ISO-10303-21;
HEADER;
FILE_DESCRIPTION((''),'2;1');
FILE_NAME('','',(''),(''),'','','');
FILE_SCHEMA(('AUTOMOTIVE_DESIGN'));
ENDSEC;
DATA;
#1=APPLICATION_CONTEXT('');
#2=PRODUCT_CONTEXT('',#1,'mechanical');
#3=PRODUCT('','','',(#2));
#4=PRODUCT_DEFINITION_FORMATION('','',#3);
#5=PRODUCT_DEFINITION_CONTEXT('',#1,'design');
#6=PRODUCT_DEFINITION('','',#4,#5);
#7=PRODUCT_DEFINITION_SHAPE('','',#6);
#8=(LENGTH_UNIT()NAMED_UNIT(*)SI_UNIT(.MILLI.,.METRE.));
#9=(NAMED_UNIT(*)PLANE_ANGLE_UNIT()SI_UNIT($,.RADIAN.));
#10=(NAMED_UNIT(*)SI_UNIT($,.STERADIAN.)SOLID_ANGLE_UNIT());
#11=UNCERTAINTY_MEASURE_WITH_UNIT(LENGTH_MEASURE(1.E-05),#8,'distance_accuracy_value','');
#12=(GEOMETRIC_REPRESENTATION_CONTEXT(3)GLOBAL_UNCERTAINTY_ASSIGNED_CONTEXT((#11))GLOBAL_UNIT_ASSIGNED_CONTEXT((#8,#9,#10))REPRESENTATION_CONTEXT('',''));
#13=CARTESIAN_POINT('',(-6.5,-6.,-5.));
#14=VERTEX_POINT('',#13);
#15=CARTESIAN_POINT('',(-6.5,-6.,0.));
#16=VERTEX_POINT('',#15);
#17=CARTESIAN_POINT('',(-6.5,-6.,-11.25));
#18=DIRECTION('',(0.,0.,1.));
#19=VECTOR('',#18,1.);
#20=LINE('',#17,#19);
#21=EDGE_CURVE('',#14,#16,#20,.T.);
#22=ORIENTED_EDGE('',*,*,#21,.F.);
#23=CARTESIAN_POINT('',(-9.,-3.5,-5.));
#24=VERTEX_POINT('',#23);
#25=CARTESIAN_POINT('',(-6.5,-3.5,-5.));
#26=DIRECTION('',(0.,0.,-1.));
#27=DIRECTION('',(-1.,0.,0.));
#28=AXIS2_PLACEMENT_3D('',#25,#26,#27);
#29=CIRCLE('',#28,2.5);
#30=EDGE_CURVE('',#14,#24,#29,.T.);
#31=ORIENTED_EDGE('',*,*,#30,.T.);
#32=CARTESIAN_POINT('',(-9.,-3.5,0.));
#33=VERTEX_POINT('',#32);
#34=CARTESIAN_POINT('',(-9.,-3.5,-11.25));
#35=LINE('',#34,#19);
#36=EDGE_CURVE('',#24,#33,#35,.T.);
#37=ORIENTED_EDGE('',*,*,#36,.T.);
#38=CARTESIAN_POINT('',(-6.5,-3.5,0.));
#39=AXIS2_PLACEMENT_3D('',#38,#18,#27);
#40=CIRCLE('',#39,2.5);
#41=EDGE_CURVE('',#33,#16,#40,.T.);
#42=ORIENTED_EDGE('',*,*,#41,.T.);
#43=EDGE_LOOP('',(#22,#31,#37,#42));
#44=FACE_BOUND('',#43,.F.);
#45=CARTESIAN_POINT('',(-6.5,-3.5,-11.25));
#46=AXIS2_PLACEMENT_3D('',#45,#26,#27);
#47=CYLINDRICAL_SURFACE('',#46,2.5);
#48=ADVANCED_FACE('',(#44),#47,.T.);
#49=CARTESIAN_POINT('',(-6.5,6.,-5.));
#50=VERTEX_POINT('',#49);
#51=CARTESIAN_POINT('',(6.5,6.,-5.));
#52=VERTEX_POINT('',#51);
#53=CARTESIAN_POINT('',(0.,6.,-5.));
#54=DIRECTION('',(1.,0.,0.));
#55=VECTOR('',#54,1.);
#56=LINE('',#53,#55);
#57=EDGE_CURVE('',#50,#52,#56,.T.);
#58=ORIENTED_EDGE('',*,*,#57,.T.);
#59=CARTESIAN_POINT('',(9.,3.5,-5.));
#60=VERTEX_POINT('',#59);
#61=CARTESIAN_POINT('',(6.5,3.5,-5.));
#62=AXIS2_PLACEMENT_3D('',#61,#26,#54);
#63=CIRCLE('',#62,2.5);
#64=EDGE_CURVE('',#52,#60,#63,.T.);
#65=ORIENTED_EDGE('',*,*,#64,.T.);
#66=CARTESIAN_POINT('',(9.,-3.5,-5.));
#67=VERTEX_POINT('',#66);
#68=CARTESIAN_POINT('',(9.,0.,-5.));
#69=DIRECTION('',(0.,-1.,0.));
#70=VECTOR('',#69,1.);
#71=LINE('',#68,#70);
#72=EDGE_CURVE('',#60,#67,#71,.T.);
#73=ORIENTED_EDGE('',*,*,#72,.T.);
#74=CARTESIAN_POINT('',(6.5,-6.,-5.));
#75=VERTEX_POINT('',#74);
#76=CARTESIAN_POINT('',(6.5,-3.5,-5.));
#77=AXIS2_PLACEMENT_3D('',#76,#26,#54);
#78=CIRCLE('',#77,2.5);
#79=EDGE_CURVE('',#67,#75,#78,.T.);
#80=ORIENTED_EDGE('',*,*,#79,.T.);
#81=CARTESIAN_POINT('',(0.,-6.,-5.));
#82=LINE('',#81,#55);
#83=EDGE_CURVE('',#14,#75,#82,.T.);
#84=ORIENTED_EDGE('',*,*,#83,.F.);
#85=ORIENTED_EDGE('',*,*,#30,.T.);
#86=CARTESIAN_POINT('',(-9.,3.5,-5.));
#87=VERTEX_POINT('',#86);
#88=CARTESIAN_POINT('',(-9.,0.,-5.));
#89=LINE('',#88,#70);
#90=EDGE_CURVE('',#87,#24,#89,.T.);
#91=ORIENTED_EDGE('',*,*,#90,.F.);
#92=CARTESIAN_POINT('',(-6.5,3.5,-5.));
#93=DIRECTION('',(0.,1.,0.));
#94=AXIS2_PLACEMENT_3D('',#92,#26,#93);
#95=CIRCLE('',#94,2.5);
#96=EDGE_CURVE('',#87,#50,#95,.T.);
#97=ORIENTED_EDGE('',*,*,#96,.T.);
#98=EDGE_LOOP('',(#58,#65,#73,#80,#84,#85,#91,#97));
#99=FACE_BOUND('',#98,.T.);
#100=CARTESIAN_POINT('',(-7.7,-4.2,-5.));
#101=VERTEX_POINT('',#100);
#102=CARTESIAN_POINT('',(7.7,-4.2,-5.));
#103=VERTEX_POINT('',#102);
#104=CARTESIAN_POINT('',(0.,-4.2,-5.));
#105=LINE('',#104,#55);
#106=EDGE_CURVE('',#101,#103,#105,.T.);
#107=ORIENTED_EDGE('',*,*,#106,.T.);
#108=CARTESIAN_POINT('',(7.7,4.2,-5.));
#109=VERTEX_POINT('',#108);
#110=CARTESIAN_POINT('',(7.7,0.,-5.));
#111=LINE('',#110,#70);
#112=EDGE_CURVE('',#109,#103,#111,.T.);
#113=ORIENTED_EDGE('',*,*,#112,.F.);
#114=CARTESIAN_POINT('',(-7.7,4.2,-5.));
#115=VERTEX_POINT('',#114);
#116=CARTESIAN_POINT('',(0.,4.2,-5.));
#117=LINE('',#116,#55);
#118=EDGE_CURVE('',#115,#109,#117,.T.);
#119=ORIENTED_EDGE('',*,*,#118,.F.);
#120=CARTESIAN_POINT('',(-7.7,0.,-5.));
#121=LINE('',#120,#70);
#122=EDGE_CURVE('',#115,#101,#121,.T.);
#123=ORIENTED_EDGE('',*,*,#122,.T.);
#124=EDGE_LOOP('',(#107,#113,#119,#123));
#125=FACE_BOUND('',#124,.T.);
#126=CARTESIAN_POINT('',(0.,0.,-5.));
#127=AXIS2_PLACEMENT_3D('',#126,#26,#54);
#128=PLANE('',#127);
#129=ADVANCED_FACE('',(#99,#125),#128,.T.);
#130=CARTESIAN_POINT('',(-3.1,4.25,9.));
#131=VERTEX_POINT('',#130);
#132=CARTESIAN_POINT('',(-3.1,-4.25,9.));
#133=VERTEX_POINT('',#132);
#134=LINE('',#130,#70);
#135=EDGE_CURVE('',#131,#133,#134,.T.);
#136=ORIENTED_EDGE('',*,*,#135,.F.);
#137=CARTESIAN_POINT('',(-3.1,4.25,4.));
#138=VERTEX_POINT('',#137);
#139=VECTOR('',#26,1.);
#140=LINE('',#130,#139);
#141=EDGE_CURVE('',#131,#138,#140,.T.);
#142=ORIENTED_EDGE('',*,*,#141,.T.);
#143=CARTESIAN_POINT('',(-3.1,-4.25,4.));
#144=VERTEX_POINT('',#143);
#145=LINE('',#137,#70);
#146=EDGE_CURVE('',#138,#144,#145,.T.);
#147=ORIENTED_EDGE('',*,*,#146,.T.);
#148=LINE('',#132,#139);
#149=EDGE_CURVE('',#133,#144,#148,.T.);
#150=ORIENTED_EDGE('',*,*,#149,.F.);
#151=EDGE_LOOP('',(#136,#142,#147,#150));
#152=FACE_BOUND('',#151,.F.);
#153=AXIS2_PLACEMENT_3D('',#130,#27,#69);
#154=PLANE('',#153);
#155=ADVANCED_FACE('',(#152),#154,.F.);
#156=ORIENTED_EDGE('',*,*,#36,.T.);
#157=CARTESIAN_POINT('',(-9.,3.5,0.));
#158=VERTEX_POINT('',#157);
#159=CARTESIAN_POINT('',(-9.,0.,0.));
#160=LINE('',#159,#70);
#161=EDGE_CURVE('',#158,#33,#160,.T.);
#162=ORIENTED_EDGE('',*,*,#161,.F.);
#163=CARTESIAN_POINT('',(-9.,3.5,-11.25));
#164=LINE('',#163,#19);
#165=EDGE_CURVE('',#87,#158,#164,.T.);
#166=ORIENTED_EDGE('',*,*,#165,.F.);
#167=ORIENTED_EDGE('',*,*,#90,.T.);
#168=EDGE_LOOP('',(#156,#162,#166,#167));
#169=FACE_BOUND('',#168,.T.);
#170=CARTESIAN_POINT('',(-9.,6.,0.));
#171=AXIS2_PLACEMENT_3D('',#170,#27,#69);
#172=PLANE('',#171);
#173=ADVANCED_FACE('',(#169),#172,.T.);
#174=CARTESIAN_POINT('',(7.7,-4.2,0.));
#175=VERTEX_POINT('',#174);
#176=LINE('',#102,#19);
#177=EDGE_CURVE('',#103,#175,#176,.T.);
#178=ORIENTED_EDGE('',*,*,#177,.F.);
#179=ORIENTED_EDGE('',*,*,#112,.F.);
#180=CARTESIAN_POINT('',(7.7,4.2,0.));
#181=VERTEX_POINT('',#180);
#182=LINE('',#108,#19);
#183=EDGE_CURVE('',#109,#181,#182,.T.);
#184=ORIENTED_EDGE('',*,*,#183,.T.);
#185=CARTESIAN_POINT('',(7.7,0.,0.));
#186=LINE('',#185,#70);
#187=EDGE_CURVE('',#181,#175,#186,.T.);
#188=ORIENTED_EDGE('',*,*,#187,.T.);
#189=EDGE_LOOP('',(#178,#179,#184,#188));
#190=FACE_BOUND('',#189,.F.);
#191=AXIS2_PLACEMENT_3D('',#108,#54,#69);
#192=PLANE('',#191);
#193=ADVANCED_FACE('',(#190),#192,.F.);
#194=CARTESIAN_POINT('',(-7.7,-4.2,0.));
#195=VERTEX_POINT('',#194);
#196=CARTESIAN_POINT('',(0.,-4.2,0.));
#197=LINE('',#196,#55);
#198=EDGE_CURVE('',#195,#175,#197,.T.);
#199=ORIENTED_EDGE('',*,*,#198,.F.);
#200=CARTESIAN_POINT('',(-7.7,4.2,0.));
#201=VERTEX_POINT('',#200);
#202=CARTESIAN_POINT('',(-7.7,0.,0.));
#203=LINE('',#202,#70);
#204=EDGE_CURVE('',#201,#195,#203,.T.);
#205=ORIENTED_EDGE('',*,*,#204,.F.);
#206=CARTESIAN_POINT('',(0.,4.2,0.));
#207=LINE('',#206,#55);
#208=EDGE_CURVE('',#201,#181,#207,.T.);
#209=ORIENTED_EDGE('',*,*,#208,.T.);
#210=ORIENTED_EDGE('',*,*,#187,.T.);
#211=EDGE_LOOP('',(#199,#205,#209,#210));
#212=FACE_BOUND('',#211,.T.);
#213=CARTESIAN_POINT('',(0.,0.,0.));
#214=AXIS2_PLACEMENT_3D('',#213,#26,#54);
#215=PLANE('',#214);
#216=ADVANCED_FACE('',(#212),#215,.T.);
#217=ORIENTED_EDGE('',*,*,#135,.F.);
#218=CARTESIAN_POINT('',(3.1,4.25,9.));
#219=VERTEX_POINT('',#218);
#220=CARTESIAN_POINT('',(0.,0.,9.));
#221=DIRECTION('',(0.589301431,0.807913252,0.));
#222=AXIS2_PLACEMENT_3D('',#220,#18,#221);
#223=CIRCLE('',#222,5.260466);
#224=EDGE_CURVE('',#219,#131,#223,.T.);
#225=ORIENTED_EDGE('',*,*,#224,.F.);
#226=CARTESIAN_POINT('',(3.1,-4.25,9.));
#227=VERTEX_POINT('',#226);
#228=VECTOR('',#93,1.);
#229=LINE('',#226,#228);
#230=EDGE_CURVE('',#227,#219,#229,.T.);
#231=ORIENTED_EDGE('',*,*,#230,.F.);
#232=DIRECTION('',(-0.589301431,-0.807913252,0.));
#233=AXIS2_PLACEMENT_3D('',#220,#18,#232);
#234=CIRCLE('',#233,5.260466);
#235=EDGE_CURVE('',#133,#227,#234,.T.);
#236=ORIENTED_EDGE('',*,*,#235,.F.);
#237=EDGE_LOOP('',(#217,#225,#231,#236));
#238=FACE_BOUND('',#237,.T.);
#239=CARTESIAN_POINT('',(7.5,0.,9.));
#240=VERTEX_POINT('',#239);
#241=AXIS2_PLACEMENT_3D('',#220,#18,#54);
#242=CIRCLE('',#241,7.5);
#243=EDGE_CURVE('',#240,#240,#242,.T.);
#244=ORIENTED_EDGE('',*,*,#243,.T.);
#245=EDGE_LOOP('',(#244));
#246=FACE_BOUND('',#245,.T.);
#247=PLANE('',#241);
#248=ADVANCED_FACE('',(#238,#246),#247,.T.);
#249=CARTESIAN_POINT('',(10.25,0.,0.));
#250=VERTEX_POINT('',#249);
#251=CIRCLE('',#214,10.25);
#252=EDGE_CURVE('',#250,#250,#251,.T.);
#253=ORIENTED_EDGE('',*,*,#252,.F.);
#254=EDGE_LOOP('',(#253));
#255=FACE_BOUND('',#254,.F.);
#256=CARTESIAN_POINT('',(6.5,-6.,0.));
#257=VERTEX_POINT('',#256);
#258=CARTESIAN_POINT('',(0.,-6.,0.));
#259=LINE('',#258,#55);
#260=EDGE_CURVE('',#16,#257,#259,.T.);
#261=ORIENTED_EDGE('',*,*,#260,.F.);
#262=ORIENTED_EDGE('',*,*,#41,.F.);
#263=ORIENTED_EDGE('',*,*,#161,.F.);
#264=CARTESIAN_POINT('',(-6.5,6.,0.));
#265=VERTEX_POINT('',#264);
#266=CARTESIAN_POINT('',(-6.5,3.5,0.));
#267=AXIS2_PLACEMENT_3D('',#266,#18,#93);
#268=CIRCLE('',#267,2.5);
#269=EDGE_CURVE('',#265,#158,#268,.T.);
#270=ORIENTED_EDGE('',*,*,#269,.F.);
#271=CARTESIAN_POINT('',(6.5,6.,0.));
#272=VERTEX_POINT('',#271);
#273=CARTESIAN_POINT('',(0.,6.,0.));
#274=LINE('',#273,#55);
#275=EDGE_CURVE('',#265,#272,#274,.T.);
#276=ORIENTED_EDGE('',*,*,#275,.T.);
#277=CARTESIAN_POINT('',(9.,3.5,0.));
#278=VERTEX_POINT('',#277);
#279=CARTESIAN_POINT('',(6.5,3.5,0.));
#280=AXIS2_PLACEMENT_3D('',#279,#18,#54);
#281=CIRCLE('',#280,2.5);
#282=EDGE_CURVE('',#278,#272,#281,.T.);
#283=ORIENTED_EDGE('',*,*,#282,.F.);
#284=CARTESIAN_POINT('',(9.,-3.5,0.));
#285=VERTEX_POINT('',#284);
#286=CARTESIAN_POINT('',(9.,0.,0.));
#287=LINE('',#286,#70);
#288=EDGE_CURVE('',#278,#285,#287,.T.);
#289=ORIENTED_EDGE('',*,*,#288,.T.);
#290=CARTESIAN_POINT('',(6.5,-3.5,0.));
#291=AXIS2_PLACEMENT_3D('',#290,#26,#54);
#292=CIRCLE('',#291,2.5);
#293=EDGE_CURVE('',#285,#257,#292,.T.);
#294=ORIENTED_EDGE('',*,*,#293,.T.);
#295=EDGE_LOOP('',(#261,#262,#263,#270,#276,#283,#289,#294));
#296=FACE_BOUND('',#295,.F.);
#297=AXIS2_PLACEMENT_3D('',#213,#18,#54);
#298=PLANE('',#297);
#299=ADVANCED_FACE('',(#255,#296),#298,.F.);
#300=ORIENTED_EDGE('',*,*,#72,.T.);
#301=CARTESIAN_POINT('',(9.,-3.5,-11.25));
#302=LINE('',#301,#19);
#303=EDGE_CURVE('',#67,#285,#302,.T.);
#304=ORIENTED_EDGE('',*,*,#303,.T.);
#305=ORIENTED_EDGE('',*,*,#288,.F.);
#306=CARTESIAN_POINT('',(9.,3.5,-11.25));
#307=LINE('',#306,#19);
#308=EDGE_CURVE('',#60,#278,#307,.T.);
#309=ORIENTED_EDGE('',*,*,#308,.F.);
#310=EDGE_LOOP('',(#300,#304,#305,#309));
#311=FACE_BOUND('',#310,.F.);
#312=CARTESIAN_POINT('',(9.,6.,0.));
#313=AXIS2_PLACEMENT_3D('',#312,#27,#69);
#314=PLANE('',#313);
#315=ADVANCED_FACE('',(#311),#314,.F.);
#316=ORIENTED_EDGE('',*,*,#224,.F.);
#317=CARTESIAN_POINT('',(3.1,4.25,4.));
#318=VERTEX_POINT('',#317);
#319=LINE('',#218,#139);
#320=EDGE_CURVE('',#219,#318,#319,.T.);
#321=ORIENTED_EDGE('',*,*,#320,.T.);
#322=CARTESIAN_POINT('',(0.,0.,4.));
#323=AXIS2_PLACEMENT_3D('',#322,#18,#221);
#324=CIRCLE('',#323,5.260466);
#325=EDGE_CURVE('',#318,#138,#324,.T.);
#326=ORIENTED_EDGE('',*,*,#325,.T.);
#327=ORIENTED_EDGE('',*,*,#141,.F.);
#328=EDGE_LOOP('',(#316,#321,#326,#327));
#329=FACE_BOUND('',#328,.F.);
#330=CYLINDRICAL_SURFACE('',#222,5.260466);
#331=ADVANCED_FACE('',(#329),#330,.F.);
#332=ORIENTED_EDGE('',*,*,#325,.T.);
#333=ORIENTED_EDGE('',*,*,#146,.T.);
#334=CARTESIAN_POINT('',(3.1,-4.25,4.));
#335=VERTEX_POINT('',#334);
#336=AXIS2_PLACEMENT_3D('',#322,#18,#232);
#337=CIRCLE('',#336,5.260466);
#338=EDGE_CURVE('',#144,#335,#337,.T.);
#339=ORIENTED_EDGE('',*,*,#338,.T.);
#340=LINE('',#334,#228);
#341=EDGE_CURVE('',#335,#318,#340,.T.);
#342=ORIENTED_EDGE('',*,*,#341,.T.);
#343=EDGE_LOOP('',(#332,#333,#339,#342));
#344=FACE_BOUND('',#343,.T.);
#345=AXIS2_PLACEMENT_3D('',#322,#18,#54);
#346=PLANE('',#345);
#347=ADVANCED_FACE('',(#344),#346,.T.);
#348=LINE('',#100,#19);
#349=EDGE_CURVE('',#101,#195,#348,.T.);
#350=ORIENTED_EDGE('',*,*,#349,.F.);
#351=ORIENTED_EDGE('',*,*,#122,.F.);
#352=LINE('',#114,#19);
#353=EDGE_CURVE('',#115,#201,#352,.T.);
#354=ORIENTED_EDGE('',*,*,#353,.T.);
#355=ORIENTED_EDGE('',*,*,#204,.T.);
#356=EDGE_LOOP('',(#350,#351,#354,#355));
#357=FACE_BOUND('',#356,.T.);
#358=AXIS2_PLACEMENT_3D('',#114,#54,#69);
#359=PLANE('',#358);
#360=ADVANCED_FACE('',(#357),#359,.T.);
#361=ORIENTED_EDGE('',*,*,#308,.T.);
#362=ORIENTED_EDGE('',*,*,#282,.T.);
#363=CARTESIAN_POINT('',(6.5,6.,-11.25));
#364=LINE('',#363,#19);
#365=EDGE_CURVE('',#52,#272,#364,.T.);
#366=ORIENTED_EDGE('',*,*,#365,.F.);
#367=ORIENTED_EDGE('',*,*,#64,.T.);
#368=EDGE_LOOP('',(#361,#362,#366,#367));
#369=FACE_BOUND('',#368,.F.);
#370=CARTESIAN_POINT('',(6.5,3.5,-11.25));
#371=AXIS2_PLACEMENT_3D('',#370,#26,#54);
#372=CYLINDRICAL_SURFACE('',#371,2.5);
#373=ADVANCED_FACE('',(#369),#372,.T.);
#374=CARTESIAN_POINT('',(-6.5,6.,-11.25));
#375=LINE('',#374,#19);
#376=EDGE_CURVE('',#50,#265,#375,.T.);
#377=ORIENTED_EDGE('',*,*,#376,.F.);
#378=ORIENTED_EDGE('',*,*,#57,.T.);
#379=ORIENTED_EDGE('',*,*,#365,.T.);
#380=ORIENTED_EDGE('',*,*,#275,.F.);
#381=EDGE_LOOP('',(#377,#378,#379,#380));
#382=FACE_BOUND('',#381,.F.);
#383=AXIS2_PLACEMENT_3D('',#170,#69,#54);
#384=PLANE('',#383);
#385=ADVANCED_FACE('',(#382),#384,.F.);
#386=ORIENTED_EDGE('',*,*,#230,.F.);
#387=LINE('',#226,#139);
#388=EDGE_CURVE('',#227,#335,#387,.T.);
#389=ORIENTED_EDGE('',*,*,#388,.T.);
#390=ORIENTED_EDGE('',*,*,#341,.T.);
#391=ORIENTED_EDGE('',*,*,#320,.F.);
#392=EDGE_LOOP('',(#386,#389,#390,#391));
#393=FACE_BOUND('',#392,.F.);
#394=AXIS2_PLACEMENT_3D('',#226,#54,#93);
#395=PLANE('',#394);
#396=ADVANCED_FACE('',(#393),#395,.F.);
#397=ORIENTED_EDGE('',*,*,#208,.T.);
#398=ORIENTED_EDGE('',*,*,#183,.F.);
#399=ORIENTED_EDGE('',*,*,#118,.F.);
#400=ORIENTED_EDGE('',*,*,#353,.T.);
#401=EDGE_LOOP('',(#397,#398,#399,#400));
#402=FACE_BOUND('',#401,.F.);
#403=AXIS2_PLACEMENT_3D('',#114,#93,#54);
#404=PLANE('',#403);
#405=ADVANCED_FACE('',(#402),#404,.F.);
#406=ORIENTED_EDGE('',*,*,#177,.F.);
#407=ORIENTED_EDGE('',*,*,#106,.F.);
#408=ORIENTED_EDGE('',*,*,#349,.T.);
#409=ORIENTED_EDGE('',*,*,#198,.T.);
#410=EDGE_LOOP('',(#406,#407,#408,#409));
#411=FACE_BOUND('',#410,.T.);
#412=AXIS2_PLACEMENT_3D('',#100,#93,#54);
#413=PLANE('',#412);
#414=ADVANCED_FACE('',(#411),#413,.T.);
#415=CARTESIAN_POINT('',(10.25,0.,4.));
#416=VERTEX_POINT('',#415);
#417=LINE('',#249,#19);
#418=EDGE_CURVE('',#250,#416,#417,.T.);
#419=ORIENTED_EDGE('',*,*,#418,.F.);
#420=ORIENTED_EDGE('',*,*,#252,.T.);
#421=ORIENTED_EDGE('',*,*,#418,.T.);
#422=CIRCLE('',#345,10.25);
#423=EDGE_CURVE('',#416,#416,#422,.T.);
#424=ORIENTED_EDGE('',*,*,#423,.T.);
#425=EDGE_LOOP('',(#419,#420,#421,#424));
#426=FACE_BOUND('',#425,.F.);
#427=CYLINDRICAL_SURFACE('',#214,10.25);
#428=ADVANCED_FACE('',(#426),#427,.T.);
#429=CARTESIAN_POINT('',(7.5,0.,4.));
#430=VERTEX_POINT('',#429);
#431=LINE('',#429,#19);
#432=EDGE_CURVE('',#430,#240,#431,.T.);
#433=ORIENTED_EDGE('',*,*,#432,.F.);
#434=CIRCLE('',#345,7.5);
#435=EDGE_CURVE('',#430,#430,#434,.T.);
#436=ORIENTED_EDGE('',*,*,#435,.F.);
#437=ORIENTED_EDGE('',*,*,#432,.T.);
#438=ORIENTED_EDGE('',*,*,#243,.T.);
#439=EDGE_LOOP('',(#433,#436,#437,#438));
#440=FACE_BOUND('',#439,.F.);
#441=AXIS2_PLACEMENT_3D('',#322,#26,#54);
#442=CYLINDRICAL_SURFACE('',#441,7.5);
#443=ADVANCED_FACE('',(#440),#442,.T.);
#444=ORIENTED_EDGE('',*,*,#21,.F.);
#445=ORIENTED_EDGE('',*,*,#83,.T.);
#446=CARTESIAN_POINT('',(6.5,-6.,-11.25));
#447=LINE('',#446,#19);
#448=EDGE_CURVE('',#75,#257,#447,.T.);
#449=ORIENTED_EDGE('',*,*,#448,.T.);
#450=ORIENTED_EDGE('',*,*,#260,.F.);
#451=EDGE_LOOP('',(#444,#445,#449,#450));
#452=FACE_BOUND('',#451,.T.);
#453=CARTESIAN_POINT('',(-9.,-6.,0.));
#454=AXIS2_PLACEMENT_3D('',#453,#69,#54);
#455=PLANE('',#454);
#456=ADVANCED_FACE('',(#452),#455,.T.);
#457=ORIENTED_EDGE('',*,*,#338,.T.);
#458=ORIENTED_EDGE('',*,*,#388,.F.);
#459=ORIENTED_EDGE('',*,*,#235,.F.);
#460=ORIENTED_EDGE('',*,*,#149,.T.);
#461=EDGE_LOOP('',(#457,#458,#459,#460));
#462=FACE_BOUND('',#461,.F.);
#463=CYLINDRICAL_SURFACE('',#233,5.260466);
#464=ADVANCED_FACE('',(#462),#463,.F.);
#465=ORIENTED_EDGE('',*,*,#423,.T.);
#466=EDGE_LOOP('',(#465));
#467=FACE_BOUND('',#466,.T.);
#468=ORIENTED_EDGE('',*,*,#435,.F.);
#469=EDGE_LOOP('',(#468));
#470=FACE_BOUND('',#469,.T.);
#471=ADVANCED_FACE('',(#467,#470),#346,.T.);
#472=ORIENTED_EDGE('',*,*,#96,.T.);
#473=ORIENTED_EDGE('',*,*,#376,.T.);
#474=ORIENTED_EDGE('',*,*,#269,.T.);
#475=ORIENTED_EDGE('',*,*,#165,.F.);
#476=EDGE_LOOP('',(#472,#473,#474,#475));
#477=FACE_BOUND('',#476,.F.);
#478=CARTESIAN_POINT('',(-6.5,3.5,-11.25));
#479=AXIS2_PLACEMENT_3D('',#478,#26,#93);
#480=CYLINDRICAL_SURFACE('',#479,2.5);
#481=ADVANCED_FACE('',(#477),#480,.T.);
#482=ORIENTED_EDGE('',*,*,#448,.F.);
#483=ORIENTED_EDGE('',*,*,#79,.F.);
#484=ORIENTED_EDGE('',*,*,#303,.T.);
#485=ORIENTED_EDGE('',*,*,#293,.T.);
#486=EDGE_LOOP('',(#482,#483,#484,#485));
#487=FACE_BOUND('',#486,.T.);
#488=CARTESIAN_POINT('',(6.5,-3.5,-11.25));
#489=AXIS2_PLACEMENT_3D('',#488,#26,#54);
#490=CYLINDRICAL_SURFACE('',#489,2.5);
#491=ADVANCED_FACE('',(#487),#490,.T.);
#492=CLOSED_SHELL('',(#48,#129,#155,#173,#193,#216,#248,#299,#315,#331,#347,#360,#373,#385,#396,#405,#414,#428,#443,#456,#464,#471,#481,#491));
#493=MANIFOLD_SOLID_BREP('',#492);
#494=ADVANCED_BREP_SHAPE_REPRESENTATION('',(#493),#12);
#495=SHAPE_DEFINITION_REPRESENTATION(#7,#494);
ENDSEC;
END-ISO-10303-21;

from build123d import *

# Parameters (mm, degrees)
F0_R         = 10.25
F1_DEPTH     = 4
F2_W         = 18
F2_H         = 12
F3_DEPTH     = 5
F4_W         = 15.4
F4_H         = 8.4
F5_DEPTH     = 5
F6_R         = 7.5
F7_DEPTH     = 5
F9_DEPTH     = 5
F10_T1_DEPTH = 11.25


# Not quite as in the source:
# - a fillet or chamfer that OpenCascade refuses, or shapes differently, is made with other operations: its cross-section is extruded or revolved along the edge and cut away or added


with BuildPart() as f1:
    # F0 (on Top) → F1 (new body)
    with BuildSketch(Plane.XY):
        Circle(F0_R)
    extrude(amount=F1_DEPTH)

    # F2 (on face) → F3 (join)
    with BuildSketch(Plane(origin=(0, 0, 0), x_dir=(1, 0, 0), z_dir=(0, 0, -1))):
        Rectangle(F2_W, F2_H)
    extrude(amount=F3_DEPTH)

    # F4 (on face) → F5 (cut)
    with BuildSketch(Plane(origin=(0, 0, -5), x_dir=(1, 0, 0), z_dir=(0, 0, -1))):
        Rectangle(F4_W, F4_H)
    extrude(amount=-F5_DEPTH, mode=Mode.SUBTRACT)

    # F6 (on face) → F7 (join)
    with BuildSketch(Plane.XY.offset(4)):
        Circle(F6_R)
    extrude(amount=F7_DEPTH)

    # F8 (on face) → F9 (cut)
    with BuildSketch(Plane.XY.offset(9)):
        with BuildLine():
            ThreePointArc((3.1, 4.25), (0, 5.2604657588), (-3.1, 4.25))
            Line((-3.1, 4.25), (-3.1, -4.25))
            ThreePointArc((-3.1, -4.25), (0, -5.2604657588), (3.1, -4.25))
            Line((3.1, -4.25), (3.1, 4.25))
        make_face()
    extrude(amount=-F9_DEPTH, mode=Mode.SUBTRACT)

    # F10: fillet of radius 2.5 on 4 edges, made by hand

    # F10_s2 → F10_t1 (cut)
    with BuildSketch(Plane.XY.offset(-11.25)):
        with BuildLine():
            ThreePointArc((-6.5, 6), (-8.267766953, 5.267766953), (-9, 3.5))
            Line((-9, 3.5), (-9, 6))
            Line((-9, 6), (-6.5, 6))
        make_face()
        with BuildLine():
            ThreePointArc((-9, -3.5), (-8.267766953, -5.267766953), (-6.5, -6))
            Line((-6.5, -6), (-9, -6))
            Line((-9, -6), (-9, -3.5))
        make_face()
        with BuildLine():
            ThreePointArc((9, -3.5), (8.267766953, -5.267766953), (6.5, -6))
            Line((6.5, -6), (9, -6))
            Line((9, -6), (9, -3.5))
        make_face()
        with BuildLine():
            ThreePointArc((9, 3.5), (8.267766953, 5.267766953), (6.5, 6))
            Line((6.5, 6), (9, 6))
            Line((9, 6), (9, 3.5))
        make_face()
    extrude(amount=F10_T1_DEPTH, mode=Mode.SUBTRACT)


solid = f1.part
